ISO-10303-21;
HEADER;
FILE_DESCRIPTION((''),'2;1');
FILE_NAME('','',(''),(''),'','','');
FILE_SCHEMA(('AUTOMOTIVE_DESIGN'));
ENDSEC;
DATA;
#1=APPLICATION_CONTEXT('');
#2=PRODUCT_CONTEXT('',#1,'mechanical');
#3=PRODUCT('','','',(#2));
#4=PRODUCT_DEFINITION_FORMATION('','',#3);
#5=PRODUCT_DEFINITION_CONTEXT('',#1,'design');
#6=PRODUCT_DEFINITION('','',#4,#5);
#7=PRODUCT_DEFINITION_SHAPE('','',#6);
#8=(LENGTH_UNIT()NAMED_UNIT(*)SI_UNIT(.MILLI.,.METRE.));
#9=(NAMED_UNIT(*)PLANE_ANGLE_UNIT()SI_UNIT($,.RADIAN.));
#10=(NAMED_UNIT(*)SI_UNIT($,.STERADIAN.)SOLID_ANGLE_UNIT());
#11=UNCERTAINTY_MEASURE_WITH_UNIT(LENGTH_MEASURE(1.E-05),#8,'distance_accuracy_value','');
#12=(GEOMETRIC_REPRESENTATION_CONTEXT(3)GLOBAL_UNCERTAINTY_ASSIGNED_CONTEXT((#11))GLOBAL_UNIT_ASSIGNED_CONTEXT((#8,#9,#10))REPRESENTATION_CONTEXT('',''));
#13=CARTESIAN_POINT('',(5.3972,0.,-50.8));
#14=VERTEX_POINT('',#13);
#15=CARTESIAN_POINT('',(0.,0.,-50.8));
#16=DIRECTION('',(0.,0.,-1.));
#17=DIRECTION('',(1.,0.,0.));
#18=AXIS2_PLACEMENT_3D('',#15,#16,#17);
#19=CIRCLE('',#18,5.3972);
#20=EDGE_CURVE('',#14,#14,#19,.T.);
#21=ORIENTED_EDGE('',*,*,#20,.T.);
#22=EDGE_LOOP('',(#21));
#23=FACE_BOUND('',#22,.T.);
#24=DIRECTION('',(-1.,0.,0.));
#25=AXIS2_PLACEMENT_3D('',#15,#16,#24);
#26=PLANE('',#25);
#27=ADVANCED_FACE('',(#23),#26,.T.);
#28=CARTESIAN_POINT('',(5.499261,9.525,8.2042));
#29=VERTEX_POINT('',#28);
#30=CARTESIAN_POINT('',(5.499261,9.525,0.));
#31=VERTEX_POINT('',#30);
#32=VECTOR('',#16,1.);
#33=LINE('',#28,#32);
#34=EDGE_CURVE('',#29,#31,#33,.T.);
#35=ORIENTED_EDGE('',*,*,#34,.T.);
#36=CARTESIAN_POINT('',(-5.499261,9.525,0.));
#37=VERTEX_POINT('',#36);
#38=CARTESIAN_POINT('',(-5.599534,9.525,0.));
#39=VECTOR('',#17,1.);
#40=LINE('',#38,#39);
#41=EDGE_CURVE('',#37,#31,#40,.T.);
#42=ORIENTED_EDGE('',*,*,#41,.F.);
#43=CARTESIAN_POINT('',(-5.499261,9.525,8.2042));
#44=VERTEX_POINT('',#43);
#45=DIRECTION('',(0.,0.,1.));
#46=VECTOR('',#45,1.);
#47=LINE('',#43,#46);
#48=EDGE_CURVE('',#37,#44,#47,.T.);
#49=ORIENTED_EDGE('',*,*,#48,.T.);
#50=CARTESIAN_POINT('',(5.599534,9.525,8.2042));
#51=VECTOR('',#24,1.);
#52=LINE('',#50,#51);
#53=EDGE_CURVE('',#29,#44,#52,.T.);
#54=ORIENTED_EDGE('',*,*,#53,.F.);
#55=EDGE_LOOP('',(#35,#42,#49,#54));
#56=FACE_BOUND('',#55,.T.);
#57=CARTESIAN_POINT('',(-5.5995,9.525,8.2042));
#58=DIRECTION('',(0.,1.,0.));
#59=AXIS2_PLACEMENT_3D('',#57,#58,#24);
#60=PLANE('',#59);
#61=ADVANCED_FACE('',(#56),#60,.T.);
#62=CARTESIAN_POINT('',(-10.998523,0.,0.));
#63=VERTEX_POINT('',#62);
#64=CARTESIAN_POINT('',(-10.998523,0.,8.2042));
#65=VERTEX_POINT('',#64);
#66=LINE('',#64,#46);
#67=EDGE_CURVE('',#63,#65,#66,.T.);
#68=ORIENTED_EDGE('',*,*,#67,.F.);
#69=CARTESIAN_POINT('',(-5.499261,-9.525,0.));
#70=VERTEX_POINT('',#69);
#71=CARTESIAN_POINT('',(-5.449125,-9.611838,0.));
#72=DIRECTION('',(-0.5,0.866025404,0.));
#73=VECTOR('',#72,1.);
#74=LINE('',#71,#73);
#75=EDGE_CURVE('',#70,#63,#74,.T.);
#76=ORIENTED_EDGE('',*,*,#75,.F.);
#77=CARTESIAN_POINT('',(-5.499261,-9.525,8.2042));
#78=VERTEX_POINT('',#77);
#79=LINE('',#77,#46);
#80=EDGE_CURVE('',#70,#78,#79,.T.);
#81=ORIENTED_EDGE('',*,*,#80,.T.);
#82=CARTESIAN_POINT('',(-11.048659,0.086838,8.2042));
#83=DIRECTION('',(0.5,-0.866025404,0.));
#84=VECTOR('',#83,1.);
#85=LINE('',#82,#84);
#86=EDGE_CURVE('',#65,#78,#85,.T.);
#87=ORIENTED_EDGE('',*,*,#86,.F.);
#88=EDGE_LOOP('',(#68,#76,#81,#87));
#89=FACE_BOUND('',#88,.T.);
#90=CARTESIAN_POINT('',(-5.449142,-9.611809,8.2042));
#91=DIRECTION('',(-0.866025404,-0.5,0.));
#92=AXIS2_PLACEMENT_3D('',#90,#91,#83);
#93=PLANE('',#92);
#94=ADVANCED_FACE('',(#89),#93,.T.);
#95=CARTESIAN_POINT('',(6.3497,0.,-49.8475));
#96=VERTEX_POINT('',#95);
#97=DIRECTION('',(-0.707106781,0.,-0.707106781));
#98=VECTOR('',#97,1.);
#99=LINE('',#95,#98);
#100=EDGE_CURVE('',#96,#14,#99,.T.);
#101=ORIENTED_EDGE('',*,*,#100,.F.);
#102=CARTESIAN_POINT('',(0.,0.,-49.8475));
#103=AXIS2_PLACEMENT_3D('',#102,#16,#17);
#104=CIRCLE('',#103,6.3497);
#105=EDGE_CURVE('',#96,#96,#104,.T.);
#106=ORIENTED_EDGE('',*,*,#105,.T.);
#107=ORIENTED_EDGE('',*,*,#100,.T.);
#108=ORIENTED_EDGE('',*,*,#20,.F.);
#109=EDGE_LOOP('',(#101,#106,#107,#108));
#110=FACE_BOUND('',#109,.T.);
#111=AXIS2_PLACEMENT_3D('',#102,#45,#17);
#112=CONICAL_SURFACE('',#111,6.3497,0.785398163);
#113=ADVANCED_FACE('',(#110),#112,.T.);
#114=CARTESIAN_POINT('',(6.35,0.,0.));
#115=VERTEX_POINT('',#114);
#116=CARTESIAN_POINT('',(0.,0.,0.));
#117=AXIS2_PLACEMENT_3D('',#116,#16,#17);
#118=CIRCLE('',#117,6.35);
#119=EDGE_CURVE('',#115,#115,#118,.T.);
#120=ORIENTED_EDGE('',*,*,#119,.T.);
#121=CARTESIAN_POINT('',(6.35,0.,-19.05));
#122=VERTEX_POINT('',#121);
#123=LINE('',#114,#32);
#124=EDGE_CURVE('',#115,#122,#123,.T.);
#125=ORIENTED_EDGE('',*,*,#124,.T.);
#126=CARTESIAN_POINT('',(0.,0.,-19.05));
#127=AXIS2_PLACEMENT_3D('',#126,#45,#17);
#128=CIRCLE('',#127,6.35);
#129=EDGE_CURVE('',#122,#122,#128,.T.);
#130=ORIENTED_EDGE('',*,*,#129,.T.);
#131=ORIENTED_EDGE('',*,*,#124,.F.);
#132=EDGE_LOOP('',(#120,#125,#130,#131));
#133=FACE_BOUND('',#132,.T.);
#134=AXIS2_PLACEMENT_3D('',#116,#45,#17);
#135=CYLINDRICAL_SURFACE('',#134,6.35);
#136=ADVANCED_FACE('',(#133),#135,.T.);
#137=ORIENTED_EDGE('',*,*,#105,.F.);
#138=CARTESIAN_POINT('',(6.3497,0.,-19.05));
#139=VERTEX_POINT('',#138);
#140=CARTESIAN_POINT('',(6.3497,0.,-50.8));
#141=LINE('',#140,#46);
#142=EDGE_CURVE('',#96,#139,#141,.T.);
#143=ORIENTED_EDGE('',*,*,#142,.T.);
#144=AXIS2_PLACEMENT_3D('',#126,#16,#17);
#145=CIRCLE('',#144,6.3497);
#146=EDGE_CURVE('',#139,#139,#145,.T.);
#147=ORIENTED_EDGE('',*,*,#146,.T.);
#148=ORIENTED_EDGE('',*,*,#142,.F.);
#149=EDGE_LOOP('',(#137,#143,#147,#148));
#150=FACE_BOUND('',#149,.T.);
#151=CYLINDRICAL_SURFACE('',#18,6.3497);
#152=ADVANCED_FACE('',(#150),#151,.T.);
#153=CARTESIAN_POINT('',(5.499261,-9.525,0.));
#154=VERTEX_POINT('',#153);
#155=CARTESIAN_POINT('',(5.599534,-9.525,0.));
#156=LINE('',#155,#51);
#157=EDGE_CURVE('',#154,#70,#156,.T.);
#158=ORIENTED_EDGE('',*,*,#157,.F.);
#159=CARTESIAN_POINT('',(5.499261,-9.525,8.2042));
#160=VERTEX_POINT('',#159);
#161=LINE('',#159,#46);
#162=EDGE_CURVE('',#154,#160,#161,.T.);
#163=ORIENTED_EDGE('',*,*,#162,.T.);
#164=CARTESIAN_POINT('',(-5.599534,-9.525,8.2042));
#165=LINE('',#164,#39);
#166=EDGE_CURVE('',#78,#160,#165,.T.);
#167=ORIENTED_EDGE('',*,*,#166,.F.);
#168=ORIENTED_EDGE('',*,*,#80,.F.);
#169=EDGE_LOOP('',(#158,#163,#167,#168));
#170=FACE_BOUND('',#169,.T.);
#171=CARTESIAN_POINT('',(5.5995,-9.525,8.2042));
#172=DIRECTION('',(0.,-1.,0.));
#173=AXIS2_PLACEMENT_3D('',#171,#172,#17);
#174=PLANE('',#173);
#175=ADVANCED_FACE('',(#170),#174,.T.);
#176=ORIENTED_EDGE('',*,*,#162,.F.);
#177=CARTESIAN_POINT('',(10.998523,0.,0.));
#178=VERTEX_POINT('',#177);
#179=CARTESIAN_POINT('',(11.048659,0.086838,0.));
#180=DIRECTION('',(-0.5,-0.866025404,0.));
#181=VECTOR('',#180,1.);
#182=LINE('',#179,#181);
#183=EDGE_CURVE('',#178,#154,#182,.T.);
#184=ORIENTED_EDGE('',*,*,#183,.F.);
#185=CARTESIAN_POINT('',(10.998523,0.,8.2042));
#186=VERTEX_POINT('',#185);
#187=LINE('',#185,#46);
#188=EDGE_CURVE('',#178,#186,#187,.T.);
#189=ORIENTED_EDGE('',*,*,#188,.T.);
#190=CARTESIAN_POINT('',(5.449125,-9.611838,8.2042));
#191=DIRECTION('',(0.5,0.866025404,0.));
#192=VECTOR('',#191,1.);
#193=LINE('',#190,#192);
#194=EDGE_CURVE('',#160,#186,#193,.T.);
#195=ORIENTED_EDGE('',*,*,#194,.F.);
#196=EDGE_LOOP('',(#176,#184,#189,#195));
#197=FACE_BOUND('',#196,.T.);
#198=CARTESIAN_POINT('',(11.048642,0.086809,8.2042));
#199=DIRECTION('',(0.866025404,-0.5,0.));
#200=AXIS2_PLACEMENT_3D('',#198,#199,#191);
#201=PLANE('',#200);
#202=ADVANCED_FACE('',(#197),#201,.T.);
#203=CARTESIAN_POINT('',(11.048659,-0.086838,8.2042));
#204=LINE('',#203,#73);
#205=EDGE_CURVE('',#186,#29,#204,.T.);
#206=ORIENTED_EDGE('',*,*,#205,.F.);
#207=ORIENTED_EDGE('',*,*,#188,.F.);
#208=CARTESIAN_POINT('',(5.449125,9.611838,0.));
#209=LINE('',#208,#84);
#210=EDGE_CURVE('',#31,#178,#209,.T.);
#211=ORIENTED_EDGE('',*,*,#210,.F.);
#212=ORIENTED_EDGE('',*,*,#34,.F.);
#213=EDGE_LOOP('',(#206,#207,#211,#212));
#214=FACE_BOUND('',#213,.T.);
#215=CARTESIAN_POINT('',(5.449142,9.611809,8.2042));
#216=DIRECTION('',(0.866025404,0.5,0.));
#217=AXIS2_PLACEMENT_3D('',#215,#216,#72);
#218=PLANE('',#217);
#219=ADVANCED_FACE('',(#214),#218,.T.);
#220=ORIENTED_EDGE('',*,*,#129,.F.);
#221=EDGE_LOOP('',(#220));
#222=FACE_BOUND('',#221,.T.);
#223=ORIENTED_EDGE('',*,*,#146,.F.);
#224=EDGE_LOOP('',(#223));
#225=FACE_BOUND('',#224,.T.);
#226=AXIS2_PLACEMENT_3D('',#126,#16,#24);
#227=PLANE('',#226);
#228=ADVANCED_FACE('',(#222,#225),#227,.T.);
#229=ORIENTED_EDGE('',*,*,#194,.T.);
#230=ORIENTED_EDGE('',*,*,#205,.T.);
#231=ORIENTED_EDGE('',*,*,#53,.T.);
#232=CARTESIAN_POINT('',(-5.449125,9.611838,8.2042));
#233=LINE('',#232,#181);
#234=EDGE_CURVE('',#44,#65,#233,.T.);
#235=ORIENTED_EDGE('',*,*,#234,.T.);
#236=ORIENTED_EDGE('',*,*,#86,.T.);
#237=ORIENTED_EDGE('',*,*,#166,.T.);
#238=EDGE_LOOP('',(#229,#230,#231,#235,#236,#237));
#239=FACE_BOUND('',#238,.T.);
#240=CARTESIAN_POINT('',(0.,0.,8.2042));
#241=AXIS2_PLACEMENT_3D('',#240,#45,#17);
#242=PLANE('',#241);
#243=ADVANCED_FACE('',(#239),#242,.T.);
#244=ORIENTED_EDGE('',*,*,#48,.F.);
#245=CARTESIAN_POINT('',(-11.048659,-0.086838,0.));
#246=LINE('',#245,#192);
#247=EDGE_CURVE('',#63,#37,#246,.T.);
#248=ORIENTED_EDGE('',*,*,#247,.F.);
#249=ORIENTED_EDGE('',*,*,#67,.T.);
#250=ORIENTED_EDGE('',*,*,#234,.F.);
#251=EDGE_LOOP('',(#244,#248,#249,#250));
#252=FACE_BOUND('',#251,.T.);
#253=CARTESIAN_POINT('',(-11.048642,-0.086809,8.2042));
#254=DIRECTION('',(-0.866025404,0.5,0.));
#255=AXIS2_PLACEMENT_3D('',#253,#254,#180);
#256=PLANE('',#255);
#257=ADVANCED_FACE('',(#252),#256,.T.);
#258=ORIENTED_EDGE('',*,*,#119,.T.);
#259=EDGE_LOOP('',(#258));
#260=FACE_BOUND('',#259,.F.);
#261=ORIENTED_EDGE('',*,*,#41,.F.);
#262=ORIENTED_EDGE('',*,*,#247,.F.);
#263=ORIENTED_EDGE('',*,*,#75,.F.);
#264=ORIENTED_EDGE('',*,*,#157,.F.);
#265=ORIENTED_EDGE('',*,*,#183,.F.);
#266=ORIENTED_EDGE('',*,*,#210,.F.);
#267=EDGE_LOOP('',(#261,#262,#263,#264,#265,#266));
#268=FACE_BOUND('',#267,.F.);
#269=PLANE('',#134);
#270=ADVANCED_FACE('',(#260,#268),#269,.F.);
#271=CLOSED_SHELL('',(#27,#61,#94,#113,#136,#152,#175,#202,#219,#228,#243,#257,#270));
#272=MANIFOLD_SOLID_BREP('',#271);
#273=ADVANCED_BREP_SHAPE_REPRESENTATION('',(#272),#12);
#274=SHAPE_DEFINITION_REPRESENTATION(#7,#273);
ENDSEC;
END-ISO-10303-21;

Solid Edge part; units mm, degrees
sketch "Sketch1" plane through (0, 0, 0) normal (0, 0, 1) x (1, 0, 0)
  circle A0 centre (0, 0) radius 11.049
  dimension "D1" = 22.098
extrude "Protrusion1" add sketch "Sketch1" along normal blind 8.2042
sketch "Sketch2" plane through (0, 0, 0) normal (0, 0, -1) x (1, 0, 0)
  circle A0 centre (0, 0) radius 6.35
extrude "Protrusion2" add sketch "Sketch2" along normal blind 50.8
sketch "Sketch3" plane through (0, 0, -50.8) normal (0, 0, -1) x (1, 0, 0)
  circle A0 centre (0, 0) radius 6.3497
extrude "Cutout1" cut sketch "Sketch3" against normal blind 31.75 flip side to cut
chamfer "Chamfer_1" distance 0.9525 angle 45 1 edges at (-6.3497, 0, -50.8)
sketch "Sketch4" plane through (0, 0, 8.2042) normal (0, 0, 1) x (1, 0, 0)
  line L0 (-5.5995, 9.525) -> (5.5995, 9.525)
  dimension "D1" = 19.05
extrude "Cutout2" cut sketch "Sketch4" against normal up to next material side at (0, 9.575, 8.2042)
pattern_circular "Pattern1" count 6 over 360 about axis through (0, 0, 8.2042) along (0, 0, 1) of "Cutout2"
properties part number "24103876"
